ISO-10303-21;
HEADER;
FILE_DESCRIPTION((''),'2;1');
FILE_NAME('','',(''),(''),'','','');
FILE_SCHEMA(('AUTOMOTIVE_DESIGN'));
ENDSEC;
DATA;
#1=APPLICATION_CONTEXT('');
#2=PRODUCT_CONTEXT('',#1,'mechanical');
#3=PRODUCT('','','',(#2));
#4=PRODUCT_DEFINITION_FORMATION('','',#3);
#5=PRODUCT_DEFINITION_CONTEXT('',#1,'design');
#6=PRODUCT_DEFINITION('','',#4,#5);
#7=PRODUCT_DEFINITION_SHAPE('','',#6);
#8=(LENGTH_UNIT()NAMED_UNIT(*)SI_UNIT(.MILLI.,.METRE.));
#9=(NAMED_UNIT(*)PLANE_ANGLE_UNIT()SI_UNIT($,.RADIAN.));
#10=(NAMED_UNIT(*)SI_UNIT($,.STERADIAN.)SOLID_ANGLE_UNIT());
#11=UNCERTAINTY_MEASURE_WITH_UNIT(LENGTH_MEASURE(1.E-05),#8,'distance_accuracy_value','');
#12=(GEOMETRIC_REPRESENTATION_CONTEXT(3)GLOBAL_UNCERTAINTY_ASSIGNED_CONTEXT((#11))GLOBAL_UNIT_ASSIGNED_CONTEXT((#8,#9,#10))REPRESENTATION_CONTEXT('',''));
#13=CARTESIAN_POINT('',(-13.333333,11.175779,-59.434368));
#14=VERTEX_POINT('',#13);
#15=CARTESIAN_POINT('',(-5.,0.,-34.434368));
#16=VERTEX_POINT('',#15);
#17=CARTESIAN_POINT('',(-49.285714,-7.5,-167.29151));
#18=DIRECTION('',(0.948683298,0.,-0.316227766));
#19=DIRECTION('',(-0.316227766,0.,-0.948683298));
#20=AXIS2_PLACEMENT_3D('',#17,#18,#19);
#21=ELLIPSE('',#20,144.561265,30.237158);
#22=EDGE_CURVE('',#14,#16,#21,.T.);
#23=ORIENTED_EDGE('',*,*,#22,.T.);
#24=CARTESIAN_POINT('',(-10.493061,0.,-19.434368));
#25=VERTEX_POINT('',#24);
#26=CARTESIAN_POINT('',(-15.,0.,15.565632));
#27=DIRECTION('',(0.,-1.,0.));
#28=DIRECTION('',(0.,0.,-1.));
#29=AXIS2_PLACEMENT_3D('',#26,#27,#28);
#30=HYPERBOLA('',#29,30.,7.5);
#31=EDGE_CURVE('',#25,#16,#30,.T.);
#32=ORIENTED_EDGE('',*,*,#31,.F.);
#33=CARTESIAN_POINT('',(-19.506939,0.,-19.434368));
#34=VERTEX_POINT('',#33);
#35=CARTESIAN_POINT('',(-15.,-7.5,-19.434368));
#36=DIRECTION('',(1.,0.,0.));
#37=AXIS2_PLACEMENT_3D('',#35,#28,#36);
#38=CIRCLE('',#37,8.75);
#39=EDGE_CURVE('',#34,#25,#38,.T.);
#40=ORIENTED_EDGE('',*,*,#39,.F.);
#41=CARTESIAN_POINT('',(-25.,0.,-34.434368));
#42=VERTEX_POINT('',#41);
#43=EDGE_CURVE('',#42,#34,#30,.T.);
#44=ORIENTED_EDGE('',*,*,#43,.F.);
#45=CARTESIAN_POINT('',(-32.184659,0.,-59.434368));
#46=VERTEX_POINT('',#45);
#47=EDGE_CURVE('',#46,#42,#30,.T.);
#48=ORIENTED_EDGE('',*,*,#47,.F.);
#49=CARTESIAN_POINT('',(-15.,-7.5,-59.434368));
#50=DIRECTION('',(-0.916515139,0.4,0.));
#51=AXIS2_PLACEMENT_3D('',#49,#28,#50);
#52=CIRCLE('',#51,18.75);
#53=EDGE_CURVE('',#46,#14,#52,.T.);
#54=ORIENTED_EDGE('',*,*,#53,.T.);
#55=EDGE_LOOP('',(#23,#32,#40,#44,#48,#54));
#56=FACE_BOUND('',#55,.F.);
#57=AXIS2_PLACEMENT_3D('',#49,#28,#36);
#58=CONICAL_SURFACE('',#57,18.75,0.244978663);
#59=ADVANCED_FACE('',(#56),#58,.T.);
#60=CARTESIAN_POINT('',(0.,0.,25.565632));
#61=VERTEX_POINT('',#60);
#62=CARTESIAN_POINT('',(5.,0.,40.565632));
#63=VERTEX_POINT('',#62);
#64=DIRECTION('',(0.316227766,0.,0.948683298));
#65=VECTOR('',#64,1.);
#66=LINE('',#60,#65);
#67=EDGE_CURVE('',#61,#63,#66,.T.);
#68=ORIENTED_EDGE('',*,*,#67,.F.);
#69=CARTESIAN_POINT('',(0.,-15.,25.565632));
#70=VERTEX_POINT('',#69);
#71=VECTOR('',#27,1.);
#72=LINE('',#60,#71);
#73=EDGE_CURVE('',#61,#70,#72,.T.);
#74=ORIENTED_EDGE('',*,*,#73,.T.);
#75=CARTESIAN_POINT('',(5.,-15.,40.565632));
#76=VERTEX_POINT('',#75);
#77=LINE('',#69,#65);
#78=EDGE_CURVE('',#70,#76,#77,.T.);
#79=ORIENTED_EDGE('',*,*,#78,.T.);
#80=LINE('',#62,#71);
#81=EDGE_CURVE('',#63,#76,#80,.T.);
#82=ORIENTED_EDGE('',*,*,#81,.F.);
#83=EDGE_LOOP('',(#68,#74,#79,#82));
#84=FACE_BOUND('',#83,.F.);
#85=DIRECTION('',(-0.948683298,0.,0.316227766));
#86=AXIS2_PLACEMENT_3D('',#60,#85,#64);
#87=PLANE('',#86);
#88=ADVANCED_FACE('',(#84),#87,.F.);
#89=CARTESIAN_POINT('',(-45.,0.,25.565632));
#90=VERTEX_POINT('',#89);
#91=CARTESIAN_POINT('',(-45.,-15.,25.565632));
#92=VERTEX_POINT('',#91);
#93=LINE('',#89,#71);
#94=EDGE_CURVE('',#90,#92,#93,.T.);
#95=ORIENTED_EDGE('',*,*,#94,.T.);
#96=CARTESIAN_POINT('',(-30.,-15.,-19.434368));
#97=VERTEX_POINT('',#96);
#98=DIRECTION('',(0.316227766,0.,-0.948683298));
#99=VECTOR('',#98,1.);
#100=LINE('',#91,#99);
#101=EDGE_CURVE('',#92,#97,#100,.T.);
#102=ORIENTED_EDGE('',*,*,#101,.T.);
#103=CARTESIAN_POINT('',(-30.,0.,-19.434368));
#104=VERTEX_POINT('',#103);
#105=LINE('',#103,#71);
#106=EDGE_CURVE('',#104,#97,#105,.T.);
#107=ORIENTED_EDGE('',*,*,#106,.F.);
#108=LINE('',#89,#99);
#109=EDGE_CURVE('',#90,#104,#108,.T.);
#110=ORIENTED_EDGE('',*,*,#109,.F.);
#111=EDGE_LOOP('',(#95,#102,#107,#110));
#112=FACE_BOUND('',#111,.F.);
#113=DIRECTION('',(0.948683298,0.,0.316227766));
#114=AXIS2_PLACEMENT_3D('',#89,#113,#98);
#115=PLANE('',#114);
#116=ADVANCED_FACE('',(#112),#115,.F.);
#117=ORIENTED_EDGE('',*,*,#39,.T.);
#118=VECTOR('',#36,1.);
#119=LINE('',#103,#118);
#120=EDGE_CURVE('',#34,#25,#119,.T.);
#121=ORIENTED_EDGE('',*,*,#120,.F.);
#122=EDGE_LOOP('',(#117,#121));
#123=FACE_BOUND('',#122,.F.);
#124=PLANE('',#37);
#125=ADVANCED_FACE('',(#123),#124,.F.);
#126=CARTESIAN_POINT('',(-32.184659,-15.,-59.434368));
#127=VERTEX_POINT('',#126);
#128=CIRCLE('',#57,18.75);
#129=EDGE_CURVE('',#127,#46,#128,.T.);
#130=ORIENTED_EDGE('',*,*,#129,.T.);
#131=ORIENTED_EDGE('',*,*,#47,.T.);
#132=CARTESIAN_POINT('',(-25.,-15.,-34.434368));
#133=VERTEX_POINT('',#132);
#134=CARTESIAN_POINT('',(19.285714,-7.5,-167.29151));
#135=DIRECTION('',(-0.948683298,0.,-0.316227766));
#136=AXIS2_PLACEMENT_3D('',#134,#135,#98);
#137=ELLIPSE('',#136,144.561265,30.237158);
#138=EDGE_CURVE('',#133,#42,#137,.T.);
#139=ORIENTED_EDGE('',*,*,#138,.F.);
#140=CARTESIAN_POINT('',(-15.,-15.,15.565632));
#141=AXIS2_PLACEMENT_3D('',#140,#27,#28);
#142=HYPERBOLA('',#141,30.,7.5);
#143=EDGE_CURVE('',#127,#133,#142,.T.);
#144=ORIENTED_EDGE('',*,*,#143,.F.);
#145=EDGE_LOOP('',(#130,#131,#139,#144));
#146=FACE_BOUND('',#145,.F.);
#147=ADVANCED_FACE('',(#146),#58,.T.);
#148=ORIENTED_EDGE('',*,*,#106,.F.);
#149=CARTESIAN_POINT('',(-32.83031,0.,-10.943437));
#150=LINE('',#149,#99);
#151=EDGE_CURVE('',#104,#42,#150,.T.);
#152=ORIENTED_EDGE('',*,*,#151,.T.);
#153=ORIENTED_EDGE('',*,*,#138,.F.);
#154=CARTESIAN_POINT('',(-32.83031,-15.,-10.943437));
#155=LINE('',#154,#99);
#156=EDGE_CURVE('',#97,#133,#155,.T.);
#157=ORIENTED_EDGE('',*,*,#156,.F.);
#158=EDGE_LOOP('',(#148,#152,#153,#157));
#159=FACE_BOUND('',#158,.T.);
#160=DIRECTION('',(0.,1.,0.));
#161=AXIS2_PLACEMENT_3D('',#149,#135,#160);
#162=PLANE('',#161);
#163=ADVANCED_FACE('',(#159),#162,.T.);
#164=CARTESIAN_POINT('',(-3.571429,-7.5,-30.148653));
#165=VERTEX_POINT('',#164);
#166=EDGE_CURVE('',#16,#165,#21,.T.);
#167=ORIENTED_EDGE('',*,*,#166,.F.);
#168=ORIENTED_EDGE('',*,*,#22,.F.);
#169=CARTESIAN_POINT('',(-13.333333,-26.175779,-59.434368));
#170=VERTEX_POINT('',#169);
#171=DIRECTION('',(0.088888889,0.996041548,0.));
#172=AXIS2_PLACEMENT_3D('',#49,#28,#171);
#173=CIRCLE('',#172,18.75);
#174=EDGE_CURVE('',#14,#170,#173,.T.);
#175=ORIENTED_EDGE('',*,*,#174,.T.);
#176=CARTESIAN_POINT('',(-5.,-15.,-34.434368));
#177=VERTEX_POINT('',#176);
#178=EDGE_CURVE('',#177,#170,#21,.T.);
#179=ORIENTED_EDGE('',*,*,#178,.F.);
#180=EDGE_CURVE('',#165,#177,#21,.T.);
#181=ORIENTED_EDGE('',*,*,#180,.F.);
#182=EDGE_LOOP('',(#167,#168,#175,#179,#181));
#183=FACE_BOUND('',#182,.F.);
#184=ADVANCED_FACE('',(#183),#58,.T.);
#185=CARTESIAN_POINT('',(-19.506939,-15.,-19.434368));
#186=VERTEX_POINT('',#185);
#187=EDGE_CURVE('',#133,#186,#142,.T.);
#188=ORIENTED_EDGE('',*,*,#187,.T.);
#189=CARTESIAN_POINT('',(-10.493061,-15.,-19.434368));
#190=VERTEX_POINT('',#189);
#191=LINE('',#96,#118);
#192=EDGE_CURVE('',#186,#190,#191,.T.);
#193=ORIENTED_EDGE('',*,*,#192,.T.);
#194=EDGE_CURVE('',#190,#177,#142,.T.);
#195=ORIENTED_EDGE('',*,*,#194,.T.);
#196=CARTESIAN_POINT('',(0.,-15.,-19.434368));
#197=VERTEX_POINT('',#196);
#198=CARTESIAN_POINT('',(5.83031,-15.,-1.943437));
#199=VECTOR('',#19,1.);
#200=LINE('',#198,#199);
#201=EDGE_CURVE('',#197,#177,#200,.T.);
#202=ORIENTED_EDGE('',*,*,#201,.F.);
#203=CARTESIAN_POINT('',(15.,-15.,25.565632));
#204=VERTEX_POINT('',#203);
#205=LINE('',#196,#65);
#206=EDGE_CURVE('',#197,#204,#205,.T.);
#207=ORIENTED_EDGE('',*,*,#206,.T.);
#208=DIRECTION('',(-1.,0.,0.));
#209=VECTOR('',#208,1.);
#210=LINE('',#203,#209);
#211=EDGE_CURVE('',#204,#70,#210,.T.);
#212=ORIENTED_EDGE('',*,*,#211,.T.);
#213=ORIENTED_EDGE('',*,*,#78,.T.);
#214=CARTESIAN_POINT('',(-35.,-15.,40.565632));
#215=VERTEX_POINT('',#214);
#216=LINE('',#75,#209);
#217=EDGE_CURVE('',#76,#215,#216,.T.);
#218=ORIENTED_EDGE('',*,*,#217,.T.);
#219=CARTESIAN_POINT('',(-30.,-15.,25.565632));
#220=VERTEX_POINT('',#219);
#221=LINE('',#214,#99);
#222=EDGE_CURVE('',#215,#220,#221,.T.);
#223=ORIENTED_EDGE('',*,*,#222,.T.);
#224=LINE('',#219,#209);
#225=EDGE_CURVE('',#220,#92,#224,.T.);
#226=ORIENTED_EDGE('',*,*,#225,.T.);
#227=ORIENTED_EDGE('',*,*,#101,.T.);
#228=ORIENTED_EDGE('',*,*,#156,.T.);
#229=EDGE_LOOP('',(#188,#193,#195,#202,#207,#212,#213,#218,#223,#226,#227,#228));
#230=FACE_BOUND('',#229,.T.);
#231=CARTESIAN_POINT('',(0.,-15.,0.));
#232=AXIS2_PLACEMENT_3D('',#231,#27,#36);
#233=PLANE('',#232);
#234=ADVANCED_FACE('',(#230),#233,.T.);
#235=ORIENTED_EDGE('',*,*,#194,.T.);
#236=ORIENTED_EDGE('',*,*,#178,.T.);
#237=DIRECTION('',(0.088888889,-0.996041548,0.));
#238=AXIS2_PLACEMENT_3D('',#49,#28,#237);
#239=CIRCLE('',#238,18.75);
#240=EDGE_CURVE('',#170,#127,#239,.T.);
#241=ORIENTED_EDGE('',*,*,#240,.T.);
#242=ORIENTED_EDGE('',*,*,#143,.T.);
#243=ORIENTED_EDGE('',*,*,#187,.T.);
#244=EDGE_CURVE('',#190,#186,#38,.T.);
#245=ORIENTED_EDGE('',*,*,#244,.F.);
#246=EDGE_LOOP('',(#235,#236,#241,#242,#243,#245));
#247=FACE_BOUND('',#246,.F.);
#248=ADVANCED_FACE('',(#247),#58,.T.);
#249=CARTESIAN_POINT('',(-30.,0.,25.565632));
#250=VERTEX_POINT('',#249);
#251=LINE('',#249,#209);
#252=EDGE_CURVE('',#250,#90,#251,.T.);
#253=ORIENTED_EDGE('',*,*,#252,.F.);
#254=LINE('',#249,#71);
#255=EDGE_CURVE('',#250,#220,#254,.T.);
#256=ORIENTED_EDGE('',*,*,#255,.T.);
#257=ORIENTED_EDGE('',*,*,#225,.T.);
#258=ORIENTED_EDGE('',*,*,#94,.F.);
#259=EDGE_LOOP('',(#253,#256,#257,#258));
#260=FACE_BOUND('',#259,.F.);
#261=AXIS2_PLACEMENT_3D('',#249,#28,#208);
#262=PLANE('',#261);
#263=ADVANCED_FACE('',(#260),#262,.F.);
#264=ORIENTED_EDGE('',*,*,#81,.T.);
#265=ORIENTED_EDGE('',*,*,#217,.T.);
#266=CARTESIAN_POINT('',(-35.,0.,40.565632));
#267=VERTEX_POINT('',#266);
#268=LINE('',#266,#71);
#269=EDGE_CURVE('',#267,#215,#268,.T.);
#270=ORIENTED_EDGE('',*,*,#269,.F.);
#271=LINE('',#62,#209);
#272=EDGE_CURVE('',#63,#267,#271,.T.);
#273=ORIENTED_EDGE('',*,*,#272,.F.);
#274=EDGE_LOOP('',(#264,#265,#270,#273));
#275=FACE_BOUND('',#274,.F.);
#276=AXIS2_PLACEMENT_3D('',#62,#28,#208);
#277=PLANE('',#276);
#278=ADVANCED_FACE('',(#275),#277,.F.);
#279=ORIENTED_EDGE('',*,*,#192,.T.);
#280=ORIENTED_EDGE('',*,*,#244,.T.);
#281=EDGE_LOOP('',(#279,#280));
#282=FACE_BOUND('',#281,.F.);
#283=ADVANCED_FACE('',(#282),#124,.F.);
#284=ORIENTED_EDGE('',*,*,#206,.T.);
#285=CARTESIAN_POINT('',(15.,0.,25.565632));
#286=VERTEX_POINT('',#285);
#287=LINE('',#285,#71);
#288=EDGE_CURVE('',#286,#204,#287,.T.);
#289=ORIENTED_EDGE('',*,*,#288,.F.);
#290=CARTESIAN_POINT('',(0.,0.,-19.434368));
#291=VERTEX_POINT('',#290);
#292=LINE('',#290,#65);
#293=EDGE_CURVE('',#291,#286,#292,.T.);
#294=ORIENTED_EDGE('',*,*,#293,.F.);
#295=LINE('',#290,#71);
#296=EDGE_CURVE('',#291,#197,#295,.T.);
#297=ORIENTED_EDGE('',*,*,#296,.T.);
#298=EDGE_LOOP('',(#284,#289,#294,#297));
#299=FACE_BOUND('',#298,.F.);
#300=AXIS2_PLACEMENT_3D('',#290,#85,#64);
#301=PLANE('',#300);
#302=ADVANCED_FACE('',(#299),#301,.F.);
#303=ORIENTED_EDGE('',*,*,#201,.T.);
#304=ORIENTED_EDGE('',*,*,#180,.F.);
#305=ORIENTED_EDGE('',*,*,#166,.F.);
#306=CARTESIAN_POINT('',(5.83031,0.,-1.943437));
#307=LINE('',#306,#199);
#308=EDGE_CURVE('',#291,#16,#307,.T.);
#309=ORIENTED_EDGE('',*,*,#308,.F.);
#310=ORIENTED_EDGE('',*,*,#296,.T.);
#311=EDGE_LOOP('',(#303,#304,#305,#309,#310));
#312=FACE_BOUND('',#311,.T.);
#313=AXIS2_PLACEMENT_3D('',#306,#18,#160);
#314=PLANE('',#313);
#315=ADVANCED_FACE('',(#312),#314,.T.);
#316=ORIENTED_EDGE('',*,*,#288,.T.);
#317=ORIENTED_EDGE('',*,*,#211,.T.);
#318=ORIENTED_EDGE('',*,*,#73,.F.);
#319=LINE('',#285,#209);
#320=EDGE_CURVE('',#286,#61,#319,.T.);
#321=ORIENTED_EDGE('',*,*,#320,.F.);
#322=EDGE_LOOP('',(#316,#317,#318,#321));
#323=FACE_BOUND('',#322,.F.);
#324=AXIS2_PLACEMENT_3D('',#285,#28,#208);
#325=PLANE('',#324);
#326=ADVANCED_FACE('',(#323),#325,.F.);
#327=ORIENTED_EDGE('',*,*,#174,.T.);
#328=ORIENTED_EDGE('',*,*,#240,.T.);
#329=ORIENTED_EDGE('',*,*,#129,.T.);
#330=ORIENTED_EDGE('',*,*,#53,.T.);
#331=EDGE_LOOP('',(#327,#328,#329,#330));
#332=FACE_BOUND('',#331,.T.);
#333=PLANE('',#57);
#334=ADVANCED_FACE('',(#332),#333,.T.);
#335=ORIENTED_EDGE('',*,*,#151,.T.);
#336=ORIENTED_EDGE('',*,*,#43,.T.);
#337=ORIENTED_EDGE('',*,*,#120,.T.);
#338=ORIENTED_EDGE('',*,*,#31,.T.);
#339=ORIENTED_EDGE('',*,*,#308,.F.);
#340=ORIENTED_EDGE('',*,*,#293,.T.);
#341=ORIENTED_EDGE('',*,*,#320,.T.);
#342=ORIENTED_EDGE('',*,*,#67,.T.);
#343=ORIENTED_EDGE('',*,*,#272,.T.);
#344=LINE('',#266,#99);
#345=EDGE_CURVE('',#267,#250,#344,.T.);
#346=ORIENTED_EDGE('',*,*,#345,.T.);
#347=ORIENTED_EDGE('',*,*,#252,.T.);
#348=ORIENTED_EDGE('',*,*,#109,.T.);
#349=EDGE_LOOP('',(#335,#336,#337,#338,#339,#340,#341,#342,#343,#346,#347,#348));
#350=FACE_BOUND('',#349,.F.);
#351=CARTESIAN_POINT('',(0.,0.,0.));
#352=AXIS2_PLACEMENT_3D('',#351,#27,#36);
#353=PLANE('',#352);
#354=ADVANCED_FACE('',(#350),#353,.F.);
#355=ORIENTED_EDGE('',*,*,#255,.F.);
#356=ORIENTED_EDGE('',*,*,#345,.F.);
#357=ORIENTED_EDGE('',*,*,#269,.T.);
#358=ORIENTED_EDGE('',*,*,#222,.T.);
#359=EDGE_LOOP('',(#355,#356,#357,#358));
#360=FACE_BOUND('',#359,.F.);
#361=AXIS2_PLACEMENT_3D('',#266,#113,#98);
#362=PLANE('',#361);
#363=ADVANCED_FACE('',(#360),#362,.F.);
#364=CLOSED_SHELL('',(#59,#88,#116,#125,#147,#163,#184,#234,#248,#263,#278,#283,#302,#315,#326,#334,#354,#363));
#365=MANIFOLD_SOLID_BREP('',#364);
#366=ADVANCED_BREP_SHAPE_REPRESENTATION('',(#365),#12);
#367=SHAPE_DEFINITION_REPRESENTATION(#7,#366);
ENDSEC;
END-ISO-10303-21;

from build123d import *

# Parameters (mm, degrees)
F1_DEPTH = 15
F2_R     = 18.75
F3_DEPTH = 40


# Not quite as in the source:
# - a fillet or chamfer that OpenCascade refuses, or shapes differently, is made with other operations: its cross-section is extruded or revolved along the edge and cut away or added


with BuildPart() as f1:
    # F0 (on Front) → F1 (new body)
    with BuildSketch(Plane.XZ):
        Polygon((-15, 40.5656324383), (-35, 40.5656324383), (-30, 25.5656324383), (-15, 25.5656324383), align=None)
        Polygon((5, 40.5656324383), (-15, 40.5656324383), (-15, 25.5656324383), (0, 25.5656324383), align=None)
        Polygon((-15, 25.5656324383), (-30, 25.5656324383), (-45, 25.5656324383), (-30, -19.4343675617), (0, -19.4343675617), (15, 25.5656324383), (0, 25.5656324383), align=None)
    extrude(amount=F1_DEPTH)

    # F2 (on face) → F3 (join)
    with BuildSketch(Plane(origin=(0, 0, -19.4343675617), x_dir=(1, 0, 0), z_dir=(0, 0, -1))):
        with Locations((-15, 7.5)):
            Circle(F2_R)
    extrude(amount=F3_DEPTH)

    # F4: chamfer of 10 x 40 on 1 edges, made by hand


with BuildPart() as f4_tool2:
    # F4_s3 → F4_t4 (revolve)
    with BuildSketch(Plane.XZ.offset(7.5)):
        Polygon((3.75, -59.4343675617), (-6.25, -19.4343675617), (3.75, -19.4343675617), align=None)
    revolve(axis=Axis((-15, -7.5, -19.4343675617), (0, 0, -1)))

    split(bisect_by=Plane(origin=(5.8303102685, 0, -1.9434367562), x_dir=(0, 1, 0), z_dir=(0.9486832981, 0, -0.316227766)), keep=Keep.TOP)


with BuildPart() as f1_1:
    add(f1.part)

    # F4_t1: cut F4_tool2
    add(f4_tool2.part, mode=Mode.SUBTRACT)


with BuildPart() as f4_tool7:
    # F4_s8 → F4_t9 (revolve)
    with BuildSketch(Plane.XZ.offset(7.5)):
        Polygon((3.75, -59.4343675617), (-6.25, -19.4343675617), (3.75, -19.4343675617), align=None)
    revolve(axis=Axis((-15, -7.5, -19.4343675617), (0, 0, -1)))

    split(bisect_by=Plane.XZ.offset(15), keep=Keep.TOP)


with BuildPart() as f1_2:
    add(f1_1.part)

    # F4_t6: cut F4_tool7
    add(f4_tool7.part, mode=Mode.SUBTRACT)


with BuildPart() as f4_tool12:
    # F4_s13 → F4_t14 (revolve)
    with BuildSketch(Plane.XZ.offset(7.5)):
        Polygon((3.75, -59.4343675617), (-6.25, -19.4343675617), (3.75, -19.4343675617), align=None)
    revolve(axis=Axis((-15, -7.5, -19.4343675617), (0, 0, -1)))

    split(bisect_by=Plane.XZ, keep=Keep.BOTTOM)


with BuildPart() as f1_3:
    add(f1_2.part)

    # F4_t11: cut F4_tool12
    add(f4_tool12.part, mode=Mode.SUBTRACT)


with BuildPart() as f4_tool17:
    # F4_s18 → F4_t19 (revolve)
    with BuildSketch(Plane.XZ.offset(7.5)):
        Polygon((3.75, -59.4343675617), (-6.25, -19.4343675617), (3.75, -19.4343675617), align=None)
    revolve(axis=Axis((-15, -7.5, -19.4343675617), (0, 0, -1)))

    split(bisect_by=Plane(origin=(-32.8303102685, 0, -10.9434367562), x_dir=(0, 1, 0), z_dir=(-0.9486832981, 0, -0.316227766)), keep=Keep.TOP)


with BuildPart() as f1_4:
    add(f1_3.part)

    # F4_t16: cut F4_tool17
    add(f4_tool17.part, mode=Mode.SUBTRACT)


solid = f1_4.part
